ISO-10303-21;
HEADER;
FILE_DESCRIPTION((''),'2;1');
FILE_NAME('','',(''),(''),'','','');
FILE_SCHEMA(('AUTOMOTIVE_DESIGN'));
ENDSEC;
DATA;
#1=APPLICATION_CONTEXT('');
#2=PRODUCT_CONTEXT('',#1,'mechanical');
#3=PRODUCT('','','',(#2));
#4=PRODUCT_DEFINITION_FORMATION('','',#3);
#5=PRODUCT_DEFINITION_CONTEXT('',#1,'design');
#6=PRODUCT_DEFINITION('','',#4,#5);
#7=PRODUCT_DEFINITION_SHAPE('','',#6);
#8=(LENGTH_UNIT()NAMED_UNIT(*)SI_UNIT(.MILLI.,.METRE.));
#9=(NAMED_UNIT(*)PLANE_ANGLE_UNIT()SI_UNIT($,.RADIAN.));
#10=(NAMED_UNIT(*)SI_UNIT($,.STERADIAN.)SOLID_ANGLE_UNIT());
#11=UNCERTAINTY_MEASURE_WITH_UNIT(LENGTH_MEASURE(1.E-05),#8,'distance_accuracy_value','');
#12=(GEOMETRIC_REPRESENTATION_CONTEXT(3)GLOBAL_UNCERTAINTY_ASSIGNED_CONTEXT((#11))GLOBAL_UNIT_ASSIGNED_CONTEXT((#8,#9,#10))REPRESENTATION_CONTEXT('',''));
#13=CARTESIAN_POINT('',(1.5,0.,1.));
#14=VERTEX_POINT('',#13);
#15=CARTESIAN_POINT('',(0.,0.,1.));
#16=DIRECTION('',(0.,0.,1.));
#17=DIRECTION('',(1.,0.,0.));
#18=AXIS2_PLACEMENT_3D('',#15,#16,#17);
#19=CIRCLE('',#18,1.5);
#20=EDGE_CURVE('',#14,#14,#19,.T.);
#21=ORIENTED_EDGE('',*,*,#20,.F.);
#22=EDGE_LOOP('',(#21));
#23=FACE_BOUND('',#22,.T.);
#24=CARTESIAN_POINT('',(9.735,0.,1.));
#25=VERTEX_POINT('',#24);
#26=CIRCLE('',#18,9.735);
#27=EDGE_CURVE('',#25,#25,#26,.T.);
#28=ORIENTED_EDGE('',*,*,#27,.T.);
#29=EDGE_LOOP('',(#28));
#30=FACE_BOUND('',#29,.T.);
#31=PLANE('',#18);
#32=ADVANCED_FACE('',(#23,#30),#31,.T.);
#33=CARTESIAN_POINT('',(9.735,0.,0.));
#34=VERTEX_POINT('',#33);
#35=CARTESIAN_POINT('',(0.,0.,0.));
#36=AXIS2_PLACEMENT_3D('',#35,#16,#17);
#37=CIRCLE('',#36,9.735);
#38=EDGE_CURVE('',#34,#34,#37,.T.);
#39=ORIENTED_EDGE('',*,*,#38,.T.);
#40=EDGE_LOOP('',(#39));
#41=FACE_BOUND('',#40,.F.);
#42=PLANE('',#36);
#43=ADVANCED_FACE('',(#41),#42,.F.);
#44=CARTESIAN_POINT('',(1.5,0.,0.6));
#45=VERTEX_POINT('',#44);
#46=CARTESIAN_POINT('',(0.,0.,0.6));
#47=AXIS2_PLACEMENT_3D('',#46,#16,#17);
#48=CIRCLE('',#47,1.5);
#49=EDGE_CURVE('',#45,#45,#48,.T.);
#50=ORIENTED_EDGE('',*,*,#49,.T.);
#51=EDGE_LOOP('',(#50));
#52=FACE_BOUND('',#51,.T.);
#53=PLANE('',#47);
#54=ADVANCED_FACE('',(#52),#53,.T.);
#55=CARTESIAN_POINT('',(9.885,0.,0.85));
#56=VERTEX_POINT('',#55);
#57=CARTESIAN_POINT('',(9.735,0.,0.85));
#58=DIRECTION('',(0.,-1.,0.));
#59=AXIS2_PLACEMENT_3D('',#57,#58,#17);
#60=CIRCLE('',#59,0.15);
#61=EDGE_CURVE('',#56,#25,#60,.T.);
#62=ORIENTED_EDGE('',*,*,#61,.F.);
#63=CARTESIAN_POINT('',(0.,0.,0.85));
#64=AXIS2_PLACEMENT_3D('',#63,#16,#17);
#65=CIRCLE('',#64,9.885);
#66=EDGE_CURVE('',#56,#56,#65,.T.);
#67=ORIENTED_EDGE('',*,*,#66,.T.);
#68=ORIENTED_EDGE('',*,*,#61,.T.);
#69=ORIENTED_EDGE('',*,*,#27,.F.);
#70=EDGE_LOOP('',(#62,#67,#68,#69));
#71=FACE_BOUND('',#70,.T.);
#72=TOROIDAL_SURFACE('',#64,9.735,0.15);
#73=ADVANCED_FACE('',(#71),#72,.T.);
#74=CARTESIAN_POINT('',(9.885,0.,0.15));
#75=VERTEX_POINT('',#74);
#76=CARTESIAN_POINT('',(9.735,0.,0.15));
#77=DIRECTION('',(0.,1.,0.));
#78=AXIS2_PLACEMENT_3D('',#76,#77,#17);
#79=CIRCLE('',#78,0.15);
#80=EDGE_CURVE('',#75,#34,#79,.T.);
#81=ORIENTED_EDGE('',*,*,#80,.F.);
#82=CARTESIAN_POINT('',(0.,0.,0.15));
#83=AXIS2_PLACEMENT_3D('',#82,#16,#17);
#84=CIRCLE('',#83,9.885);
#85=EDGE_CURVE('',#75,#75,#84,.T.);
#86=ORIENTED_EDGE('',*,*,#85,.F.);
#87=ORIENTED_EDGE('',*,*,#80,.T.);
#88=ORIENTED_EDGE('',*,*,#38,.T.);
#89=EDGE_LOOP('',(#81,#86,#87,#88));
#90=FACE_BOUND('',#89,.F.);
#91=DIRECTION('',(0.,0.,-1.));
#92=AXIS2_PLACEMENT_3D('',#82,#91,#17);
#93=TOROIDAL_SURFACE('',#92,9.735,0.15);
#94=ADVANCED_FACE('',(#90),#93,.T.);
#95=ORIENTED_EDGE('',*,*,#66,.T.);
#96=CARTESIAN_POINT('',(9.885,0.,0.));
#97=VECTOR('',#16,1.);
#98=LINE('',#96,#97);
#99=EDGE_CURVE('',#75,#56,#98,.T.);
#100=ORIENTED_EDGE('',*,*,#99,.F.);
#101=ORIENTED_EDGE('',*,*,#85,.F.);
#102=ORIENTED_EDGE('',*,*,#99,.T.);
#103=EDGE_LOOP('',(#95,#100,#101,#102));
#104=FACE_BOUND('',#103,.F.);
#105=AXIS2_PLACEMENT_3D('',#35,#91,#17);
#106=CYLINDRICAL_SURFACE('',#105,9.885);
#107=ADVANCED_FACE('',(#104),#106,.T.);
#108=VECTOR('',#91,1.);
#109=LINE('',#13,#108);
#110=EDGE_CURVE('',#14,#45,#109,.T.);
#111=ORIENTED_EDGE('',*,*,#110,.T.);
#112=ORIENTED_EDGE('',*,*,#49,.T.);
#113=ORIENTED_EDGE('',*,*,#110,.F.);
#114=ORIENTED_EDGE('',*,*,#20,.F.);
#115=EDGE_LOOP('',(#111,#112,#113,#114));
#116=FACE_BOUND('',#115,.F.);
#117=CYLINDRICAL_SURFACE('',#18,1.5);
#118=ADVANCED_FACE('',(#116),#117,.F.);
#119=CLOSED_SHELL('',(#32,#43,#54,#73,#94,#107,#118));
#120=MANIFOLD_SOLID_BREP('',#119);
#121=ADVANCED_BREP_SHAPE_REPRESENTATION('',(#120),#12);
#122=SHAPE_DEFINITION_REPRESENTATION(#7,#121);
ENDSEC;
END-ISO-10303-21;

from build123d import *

# Parameters (mm, degrees)
F0_R     = 9.885
F1_DEPTH = 1
F2_R     = 0.15
F3_R     = 1.5
F4_DEPTH = 0.4


# Not quite as in the source:
# - a feature names something its author has since deleted; it is built from what else it names


with BuildPart() as f1:
    # F0 (on Top) → F1 (new body)
    with BuildSketch(Plane.XY):
        Circle(F0_R)
    extrude(amount=F1_DEPTH)

    # F2
    f2_edges = [f1.edges().sort_by_distance(p)[0] for p in [
        (-9.885, 0, 1),
        (-9.885, 0, 0),
    ]]
    fillet(f2_edges, radius=F2_R)

    # F3 (on face) → F4 (cut)
    with BuildSketch(Plane.XY.offset(1)):
        Circle(F3_R)
    extrude(amount=-F4_DEPTH, mode=Mode.SUBTRACT)


solid = f1.part
